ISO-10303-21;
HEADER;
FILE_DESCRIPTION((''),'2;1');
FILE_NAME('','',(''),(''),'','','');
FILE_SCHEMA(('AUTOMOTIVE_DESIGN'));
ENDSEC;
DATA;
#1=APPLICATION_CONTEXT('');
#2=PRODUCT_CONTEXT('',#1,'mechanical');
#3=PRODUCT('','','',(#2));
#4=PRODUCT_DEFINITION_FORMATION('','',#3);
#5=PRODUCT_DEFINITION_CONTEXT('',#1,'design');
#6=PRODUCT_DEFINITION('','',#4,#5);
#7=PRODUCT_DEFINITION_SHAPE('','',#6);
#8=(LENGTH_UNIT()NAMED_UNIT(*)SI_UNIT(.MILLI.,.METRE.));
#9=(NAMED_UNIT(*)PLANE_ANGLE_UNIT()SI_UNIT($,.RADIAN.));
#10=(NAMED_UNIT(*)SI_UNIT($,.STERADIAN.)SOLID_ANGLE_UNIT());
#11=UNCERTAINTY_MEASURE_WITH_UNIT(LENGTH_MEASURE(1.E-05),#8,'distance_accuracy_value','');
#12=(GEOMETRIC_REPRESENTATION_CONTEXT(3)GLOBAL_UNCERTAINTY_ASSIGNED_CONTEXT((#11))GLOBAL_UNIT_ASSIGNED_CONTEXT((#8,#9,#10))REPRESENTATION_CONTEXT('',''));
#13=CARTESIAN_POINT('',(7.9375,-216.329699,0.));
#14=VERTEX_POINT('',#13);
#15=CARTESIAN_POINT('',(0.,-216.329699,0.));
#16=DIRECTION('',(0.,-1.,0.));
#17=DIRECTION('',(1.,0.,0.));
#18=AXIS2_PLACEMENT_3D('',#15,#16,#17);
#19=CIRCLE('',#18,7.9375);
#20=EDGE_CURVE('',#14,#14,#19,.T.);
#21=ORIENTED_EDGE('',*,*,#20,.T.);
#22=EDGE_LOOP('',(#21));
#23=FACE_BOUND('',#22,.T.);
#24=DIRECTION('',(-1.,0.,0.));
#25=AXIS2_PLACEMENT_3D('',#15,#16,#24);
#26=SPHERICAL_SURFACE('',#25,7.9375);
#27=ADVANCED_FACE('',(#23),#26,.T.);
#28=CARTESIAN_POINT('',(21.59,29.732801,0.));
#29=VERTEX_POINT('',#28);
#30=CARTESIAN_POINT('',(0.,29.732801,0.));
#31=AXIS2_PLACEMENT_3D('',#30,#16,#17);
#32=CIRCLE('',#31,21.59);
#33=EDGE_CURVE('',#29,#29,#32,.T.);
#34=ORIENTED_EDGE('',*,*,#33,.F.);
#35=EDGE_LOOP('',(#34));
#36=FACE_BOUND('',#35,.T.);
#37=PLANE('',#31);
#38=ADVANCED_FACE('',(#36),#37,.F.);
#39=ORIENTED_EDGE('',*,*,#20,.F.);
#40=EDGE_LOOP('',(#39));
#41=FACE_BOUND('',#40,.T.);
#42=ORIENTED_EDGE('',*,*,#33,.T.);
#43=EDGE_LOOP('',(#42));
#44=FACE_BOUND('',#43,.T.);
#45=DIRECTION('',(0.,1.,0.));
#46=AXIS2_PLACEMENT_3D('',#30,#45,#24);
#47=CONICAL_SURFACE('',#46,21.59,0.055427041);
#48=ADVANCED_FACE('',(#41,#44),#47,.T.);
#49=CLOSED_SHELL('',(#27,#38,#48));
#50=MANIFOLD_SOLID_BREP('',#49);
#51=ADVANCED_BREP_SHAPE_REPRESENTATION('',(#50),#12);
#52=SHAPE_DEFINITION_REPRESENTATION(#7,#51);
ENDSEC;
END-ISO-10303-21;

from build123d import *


with BuildPart() as part:
    # Sketch1 → Revolve1 (revolve)
    with BuildSketch(Plane.XY):
        with BuildLine():
            Line((21.59, 29.732800752), (0, 29.732800752))
            Line((0, 29.732800752), (0, -224.267199248))
            ThreePointArc((0, -224.267199248), (5.612660076, -221.942359324), (7.9375, -216.329699248))
            Line((7.9375, -216.329699248), (21.59, 29.732800752))
        make_face()
    revolve(axis=Axis((0, -224.267199248, 0), (0, 1, 0)))


solid = part.part
